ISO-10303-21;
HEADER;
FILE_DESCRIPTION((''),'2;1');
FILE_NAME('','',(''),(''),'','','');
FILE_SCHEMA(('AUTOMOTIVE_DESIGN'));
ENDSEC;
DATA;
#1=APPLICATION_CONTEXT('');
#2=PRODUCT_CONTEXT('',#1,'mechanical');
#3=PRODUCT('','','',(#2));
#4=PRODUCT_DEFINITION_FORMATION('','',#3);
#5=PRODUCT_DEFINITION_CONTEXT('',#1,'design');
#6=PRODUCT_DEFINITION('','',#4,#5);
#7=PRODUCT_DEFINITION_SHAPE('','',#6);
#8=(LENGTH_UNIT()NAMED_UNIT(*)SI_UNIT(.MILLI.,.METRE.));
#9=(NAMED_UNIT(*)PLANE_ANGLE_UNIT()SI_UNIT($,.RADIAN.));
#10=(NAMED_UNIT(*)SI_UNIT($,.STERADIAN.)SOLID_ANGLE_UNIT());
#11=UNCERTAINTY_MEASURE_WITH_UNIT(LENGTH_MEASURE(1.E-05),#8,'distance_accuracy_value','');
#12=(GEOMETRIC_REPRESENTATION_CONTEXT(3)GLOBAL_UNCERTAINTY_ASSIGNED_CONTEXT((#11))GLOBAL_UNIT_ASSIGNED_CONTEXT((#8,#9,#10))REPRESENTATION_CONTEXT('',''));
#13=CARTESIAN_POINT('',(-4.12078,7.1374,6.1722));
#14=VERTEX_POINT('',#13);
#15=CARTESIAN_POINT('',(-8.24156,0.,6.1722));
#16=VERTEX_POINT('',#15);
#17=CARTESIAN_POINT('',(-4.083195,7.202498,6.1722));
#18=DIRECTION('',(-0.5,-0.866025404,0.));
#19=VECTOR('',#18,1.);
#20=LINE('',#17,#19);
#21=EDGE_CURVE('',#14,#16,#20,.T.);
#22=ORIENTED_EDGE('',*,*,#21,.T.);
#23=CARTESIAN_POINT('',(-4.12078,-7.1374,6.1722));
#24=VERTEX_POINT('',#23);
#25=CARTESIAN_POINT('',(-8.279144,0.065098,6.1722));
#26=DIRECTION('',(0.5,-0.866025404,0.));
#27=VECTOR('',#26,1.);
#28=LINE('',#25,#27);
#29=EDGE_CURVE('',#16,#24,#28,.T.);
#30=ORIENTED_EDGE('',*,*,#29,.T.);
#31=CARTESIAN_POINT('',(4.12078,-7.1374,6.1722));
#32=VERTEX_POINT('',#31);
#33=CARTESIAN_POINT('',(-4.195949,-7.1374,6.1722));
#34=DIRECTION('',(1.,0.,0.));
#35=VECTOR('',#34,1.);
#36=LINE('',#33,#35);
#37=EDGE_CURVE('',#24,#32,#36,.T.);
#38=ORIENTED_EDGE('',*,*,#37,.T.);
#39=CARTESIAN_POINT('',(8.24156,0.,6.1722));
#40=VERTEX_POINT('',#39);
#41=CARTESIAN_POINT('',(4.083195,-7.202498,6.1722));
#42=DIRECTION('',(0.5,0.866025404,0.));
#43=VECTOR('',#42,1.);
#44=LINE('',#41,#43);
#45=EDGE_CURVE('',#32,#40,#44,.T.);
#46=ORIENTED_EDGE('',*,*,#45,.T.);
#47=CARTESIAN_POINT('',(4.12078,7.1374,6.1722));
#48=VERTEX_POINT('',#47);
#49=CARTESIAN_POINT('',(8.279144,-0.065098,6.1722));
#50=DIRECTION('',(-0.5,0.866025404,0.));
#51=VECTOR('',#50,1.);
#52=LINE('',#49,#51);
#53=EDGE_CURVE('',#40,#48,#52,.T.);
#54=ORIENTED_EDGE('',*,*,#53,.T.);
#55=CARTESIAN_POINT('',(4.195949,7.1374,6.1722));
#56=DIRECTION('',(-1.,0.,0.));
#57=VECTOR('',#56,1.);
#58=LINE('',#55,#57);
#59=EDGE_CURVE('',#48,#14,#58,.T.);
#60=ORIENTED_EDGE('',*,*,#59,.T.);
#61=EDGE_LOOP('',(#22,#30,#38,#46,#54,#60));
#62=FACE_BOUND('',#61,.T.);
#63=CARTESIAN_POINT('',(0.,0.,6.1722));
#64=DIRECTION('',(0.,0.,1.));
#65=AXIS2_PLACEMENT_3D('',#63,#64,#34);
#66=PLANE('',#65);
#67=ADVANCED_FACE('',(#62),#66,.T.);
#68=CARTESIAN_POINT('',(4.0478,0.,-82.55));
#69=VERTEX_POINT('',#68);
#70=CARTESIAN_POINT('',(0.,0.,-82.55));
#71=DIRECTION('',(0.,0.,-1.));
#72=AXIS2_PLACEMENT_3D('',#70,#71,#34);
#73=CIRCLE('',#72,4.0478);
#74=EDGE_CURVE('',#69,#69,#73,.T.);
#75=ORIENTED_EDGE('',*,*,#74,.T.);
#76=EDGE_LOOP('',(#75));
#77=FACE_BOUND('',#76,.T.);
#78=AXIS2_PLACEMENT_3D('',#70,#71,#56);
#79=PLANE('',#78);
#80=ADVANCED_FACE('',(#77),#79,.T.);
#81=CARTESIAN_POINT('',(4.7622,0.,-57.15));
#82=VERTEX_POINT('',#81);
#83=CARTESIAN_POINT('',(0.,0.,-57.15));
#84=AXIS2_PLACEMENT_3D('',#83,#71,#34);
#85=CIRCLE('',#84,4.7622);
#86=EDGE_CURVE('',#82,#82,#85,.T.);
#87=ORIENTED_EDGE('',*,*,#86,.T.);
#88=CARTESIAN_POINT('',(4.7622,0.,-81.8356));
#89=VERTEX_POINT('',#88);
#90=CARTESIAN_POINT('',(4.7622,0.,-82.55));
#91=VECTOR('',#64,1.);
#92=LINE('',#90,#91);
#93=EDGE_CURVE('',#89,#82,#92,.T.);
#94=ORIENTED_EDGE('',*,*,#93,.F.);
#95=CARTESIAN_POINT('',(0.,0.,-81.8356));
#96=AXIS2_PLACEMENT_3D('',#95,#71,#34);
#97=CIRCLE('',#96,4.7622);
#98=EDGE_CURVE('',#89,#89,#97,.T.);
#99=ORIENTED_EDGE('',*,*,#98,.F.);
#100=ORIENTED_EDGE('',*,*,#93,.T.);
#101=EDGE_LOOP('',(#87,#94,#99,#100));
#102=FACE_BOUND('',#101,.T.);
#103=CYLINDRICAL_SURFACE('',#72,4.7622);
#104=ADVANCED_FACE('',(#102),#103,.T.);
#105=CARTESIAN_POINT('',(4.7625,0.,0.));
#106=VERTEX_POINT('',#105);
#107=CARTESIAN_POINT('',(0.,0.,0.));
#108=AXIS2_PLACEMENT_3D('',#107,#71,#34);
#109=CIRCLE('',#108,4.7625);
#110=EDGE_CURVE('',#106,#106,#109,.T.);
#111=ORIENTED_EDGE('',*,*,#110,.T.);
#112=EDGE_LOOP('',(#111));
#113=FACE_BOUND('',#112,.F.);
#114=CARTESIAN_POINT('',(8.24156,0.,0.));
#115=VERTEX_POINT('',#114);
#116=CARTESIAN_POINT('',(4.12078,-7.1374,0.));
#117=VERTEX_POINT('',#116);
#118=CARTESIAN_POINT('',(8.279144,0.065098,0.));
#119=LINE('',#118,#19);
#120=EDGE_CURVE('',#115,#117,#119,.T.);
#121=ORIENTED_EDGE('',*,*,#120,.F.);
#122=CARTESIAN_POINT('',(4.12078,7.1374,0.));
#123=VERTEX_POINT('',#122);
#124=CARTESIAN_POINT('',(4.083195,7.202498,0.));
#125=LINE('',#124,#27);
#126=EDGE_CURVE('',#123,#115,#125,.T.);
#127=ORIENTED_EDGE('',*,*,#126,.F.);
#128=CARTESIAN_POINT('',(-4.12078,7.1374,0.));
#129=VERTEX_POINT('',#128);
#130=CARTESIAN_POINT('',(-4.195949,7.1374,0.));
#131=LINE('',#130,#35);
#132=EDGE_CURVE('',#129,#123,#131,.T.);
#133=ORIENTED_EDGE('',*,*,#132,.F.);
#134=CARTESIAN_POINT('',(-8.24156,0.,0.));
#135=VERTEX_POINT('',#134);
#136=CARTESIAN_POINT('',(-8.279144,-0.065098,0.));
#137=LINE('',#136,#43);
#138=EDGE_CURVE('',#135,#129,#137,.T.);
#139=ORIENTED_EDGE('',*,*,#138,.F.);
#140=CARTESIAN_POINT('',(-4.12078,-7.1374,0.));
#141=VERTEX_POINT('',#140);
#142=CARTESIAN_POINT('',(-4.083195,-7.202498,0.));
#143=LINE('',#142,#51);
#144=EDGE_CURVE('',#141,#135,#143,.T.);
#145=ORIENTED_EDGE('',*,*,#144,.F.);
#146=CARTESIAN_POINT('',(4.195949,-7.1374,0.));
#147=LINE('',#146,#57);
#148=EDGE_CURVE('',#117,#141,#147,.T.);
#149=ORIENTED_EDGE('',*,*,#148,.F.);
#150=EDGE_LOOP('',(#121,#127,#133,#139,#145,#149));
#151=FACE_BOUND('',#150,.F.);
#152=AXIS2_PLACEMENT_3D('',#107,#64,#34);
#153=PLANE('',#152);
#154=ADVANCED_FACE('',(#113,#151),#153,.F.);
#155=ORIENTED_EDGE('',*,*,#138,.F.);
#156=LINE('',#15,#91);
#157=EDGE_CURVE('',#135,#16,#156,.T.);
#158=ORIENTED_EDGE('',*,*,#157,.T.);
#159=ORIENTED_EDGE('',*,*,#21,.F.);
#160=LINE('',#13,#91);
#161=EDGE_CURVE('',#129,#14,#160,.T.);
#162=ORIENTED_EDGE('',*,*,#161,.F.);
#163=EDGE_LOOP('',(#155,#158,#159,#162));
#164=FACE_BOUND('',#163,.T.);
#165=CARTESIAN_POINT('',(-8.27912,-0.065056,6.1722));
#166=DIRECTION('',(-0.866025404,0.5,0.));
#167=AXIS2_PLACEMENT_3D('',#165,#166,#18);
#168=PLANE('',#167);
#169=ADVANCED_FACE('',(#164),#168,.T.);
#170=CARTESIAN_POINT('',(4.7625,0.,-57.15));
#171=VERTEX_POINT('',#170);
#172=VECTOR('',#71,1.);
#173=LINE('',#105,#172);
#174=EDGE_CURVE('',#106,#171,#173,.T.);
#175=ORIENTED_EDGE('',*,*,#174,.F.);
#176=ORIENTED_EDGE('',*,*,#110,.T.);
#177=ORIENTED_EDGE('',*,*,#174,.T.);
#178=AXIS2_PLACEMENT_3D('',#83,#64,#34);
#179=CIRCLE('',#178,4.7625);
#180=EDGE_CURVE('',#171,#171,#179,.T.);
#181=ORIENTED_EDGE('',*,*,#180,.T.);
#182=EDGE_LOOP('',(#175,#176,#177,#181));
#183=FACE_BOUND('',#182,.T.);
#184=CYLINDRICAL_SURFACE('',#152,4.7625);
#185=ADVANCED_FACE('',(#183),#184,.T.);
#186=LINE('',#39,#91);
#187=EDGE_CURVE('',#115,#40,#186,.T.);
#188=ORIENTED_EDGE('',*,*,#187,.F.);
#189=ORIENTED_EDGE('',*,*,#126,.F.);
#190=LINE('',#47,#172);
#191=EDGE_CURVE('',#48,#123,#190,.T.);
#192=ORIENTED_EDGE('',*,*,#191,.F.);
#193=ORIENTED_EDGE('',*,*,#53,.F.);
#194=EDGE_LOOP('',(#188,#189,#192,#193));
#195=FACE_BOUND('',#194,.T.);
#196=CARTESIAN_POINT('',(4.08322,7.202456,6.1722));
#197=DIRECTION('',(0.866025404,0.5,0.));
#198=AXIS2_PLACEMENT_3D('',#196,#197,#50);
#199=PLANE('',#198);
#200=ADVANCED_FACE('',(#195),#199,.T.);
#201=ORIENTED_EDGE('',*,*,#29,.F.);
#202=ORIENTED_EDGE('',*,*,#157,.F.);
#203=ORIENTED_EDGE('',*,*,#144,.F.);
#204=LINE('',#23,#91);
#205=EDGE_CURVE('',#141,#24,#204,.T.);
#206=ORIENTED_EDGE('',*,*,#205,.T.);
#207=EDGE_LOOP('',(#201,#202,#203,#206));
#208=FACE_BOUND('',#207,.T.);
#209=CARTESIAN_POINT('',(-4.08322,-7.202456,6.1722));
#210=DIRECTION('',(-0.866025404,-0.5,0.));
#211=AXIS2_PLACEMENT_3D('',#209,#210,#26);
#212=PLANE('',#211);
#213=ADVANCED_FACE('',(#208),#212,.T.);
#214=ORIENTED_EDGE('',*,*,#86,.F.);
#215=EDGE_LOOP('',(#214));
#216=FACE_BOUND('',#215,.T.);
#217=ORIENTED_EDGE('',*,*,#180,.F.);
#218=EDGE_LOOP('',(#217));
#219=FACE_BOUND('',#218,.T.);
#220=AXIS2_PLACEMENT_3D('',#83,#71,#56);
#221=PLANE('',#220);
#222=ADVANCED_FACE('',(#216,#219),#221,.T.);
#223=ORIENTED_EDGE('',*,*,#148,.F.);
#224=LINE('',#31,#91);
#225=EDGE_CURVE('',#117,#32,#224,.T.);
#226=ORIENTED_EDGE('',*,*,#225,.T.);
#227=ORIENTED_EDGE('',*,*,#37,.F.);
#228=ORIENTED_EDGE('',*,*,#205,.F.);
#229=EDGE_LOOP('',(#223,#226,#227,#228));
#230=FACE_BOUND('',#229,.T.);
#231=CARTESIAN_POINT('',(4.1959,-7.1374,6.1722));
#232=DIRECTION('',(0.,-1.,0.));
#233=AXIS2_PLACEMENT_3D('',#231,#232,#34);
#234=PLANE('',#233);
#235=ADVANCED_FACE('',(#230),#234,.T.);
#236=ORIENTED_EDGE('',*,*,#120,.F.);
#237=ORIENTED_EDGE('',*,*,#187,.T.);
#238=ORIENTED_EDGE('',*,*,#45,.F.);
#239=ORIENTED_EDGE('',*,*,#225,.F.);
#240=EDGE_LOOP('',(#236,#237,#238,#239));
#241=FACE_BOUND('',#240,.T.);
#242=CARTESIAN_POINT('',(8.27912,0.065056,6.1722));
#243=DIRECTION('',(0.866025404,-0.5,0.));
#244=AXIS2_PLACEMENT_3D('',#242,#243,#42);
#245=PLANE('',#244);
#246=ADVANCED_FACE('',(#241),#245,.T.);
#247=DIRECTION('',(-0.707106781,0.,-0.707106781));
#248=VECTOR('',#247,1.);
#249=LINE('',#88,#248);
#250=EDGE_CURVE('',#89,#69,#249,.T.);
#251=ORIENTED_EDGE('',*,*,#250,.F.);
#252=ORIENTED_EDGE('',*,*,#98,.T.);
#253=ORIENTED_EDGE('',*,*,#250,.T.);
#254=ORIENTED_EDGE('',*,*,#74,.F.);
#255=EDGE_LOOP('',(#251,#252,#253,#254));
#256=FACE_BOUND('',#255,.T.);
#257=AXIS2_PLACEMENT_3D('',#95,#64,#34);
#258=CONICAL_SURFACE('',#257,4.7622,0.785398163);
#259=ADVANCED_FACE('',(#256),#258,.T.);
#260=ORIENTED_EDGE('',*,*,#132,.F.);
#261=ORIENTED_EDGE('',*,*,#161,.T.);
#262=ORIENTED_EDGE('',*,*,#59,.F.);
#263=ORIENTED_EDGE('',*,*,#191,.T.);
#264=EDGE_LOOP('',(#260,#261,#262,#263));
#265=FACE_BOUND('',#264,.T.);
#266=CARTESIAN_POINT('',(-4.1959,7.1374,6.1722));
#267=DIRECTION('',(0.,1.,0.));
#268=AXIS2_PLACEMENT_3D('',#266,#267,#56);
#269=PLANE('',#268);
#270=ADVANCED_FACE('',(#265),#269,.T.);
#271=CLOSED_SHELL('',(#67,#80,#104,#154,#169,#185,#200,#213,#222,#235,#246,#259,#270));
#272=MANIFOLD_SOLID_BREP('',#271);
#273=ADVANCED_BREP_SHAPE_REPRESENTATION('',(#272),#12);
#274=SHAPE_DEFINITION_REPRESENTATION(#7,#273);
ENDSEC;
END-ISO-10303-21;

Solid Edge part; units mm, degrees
sketch "Sketch1" plane through (0, 0, 0) normal (0, 0, 1) x (1, 0, 0)
  circle A0 centre (0, 0) radius 8.2794
  dimension "D1" = 16.5588
extrude "Protrusion1" add sketch "Sketch1" along normal blind 6.1722
sketch "Sketch2" plane through (0, 0, 0) normal (0, 0, -1) x (1, 0, 0)
  circle A0 centre (0, 0) radius 4.7625
extrude "Protrusion2" add sketch "Sketch2" along normal blind 82.55
sketch "Sketch3" plane through (0, 0, -82.55) normal (0, 0, -1) x (1, 0, 0)
  circle A0 centre (0, 0) radius 4.7622
extrude "Cutout1" cut sketch "Sketch3" against normal blind 25.4 flip side to cut
chamfer "Chamfer_1" distance 0.7144 angle 45 1 edges at (-4.7622, 0, -82.55)
sketch "Sketch4" plane through (0, 0, 6.1722) normal (0, 0, 1) x (1, 0, 0)
  line L0 (-4.1959, 7.1374) -> (4.1959, 7.1374)
  dimension "D1" = 14.2748
extrude "Cutout2" cut sketch "Sketch4" against normal up to next material side at (0, 7.1874, 6.1722)
pattern_circular "Pattern1" count 6 over 360 about axis through (0, 0, 6.1722) along (0, 0, 1) of "Cutout2"
properties part number "24100085"
